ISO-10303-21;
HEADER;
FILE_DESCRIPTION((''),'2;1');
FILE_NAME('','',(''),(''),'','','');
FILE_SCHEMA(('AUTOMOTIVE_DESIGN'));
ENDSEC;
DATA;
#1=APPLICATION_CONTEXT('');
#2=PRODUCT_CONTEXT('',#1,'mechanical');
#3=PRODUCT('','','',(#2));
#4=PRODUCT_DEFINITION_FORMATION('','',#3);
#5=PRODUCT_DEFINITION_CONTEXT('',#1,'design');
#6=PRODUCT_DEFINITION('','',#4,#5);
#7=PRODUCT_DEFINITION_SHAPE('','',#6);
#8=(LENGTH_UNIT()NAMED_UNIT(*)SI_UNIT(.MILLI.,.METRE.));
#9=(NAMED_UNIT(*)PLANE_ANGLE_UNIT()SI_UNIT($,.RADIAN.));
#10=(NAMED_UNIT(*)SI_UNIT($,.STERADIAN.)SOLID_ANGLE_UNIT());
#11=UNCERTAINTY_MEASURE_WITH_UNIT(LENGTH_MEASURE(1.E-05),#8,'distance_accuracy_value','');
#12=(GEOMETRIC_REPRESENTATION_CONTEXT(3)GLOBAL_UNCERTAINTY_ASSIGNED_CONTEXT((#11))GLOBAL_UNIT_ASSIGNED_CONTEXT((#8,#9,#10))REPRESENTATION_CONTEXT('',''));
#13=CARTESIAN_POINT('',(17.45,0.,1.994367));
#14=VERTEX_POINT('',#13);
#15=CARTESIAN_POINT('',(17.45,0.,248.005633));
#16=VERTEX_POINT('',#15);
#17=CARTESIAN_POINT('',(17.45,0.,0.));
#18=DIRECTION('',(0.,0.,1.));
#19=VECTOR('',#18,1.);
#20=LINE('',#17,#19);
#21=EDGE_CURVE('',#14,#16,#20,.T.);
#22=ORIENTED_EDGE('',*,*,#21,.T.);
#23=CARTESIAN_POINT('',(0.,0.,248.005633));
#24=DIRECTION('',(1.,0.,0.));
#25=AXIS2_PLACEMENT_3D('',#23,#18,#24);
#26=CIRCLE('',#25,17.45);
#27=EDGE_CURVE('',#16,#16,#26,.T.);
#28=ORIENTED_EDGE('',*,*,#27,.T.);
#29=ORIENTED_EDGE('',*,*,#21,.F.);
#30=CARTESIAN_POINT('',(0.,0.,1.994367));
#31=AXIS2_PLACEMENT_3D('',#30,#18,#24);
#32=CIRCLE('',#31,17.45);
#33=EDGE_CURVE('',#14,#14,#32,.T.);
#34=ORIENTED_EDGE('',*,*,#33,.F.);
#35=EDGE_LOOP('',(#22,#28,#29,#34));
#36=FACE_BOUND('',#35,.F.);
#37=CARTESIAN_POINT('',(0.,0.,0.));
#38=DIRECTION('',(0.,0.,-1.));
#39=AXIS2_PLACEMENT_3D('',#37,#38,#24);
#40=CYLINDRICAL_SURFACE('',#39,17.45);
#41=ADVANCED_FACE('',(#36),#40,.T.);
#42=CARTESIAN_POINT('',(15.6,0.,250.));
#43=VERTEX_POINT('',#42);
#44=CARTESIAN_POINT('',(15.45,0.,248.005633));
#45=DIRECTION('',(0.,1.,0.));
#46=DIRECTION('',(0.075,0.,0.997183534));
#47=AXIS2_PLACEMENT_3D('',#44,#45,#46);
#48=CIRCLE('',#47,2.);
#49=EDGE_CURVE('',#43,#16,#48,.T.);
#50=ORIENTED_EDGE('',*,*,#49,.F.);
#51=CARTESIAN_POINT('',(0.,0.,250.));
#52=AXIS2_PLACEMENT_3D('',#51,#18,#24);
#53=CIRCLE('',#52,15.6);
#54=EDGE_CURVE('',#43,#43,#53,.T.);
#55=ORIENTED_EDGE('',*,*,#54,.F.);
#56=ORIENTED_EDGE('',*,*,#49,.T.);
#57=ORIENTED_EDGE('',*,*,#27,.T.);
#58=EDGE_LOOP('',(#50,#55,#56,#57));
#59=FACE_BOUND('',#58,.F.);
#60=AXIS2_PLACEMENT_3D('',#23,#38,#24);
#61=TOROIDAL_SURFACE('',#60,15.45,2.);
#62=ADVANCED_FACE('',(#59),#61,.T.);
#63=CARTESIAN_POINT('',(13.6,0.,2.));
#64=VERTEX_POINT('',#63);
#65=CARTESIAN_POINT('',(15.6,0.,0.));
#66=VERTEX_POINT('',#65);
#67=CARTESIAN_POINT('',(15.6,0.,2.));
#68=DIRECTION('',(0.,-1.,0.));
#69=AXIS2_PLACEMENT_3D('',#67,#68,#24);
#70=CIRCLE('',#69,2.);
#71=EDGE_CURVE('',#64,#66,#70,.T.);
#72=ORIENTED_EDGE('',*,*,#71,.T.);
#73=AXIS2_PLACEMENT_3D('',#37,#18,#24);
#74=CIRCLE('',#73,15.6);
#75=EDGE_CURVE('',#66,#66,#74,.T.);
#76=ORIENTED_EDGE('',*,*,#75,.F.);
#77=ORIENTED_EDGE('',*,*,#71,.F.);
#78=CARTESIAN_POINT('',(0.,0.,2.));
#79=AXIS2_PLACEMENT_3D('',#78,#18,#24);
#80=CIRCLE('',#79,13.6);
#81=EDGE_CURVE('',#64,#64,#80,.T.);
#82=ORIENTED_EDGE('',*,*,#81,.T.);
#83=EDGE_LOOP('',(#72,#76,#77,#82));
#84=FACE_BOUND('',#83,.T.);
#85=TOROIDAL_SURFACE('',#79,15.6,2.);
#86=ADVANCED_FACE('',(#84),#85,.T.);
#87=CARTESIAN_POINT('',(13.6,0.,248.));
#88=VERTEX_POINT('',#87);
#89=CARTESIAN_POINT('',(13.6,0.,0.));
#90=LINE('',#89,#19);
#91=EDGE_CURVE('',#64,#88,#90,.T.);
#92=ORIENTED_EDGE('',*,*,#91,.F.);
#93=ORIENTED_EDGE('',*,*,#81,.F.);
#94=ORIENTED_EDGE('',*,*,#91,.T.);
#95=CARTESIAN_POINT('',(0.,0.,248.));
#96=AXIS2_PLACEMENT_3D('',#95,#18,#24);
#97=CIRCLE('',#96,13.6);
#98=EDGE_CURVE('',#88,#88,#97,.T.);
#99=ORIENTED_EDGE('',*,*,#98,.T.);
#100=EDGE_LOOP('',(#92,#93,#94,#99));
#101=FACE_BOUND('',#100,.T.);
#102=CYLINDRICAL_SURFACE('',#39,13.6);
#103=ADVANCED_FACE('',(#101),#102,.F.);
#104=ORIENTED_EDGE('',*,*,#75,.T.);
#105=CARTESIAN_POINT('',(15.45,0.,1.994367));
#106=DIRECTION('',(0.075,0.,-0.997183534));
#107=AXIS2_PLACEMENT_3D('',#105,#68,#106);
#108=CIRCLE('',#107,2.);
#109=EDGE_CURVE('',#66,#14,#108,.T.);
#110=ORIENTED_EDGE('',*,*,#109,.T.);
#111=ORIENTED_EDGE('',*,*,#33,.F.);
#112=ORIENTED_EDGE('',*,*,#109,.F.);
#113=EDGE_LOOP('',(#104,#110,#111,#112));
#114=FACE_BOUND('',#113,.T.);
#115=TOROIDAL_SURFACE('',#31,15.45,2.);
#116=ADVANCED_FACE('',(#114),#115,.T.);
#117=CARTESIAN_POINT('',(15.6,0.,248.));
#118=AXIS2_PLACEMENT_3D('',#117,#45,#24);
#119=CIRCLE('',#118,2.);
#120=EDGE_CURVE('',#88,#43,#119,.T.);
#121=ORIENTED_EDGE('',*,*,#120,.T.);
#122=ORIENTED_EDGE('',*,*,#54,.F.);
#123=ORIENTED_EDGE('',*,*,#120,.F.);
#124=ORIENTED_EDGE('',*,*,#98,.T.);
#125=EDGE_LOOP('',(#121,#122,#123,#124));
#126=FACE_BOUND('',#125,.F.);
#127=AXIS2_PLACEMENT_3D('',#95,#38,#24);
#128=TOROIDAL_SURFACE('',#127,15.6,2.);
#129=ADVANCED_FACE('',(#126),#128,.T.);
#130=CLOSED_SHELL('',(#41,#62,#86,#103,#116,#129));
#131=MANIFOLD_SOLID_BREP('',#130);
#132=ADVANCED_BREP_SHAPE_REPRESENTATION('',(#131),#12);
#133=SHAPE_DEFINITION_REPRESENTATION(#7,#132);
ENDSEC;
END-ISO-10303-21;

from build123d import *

# Parameters (mm, degrees)
F0_R     = 17.45
F0_R_2   = 13.6
F1_DEPTH = 250
F2_R     = 2
F4_R     = 2


# Not quite as in the source:
# - a fillet or chamfer that OpenCascade refuses, or shapes differently, is made with other operations: its cross-section is extruded or revolved along the edge and cut away or added


with BuildPart() as f1:
    # F0 (on Top) → F1 (new body)
    with BuildSketch(Plane.XY):
        Circle(F0_R)
        Circle(F0_R_2, mode=Mode.SUBTRACT)
    extrude(amount=F1_DEPTH)

    # F2
    f2_edges = [f1.edges().sort_by_distance(p)[0] for p in [
        (-13.6, 0, 250),
    ]]
    fillet(f2_edges, radius=F2_R)

    # F3: fillet of radius 2 on 1 edges, made by hand

    # F3_s1 → F3_t2 (revolve, cut)
    with BuildSketch(Plane.XZ):
        with BuildLine():
            ThreePointArc((15.6, 250), (16.9162878299, 249.3657799834), (17.45, 248.0056329325))
            Line((17.45, 248.0056329325), (17.45, 250))
            Line((17.45, 250), (15.6, 250))
        make_face()
    revolve(axis=Axis((0, 0, 250), (0, 0, 1)), mode=Mode.SUBTRACT)

    # F4
    f4_edges = [f1.edges().sort_by_distance(p)[0] for p in [
        (-13.6, 0, 0),
    ]]
    fillet(f4_edges, radius=F4_R)

    # F5: fillet of radius 2 on 1 edges, made by hand

    # F5_s1 → F5_t2 (revolve, cut)
    with BuildSketch(Plane.XZ):
        with BuildLine():
            ThreePointArc((15.6, 0), (16.9162878299, 0.6342200166), (17.45, 1.9943670675))
            Line((17.45, 1.9943670675), (17.45, 0))
            Line((17.45, 0), (15.6, 0))
        make_face()
    revolve(axis=Axis((0, 0, 0), (0, 0, 1)), mode=Mode.SUBTRACT)


solid = f1.part
